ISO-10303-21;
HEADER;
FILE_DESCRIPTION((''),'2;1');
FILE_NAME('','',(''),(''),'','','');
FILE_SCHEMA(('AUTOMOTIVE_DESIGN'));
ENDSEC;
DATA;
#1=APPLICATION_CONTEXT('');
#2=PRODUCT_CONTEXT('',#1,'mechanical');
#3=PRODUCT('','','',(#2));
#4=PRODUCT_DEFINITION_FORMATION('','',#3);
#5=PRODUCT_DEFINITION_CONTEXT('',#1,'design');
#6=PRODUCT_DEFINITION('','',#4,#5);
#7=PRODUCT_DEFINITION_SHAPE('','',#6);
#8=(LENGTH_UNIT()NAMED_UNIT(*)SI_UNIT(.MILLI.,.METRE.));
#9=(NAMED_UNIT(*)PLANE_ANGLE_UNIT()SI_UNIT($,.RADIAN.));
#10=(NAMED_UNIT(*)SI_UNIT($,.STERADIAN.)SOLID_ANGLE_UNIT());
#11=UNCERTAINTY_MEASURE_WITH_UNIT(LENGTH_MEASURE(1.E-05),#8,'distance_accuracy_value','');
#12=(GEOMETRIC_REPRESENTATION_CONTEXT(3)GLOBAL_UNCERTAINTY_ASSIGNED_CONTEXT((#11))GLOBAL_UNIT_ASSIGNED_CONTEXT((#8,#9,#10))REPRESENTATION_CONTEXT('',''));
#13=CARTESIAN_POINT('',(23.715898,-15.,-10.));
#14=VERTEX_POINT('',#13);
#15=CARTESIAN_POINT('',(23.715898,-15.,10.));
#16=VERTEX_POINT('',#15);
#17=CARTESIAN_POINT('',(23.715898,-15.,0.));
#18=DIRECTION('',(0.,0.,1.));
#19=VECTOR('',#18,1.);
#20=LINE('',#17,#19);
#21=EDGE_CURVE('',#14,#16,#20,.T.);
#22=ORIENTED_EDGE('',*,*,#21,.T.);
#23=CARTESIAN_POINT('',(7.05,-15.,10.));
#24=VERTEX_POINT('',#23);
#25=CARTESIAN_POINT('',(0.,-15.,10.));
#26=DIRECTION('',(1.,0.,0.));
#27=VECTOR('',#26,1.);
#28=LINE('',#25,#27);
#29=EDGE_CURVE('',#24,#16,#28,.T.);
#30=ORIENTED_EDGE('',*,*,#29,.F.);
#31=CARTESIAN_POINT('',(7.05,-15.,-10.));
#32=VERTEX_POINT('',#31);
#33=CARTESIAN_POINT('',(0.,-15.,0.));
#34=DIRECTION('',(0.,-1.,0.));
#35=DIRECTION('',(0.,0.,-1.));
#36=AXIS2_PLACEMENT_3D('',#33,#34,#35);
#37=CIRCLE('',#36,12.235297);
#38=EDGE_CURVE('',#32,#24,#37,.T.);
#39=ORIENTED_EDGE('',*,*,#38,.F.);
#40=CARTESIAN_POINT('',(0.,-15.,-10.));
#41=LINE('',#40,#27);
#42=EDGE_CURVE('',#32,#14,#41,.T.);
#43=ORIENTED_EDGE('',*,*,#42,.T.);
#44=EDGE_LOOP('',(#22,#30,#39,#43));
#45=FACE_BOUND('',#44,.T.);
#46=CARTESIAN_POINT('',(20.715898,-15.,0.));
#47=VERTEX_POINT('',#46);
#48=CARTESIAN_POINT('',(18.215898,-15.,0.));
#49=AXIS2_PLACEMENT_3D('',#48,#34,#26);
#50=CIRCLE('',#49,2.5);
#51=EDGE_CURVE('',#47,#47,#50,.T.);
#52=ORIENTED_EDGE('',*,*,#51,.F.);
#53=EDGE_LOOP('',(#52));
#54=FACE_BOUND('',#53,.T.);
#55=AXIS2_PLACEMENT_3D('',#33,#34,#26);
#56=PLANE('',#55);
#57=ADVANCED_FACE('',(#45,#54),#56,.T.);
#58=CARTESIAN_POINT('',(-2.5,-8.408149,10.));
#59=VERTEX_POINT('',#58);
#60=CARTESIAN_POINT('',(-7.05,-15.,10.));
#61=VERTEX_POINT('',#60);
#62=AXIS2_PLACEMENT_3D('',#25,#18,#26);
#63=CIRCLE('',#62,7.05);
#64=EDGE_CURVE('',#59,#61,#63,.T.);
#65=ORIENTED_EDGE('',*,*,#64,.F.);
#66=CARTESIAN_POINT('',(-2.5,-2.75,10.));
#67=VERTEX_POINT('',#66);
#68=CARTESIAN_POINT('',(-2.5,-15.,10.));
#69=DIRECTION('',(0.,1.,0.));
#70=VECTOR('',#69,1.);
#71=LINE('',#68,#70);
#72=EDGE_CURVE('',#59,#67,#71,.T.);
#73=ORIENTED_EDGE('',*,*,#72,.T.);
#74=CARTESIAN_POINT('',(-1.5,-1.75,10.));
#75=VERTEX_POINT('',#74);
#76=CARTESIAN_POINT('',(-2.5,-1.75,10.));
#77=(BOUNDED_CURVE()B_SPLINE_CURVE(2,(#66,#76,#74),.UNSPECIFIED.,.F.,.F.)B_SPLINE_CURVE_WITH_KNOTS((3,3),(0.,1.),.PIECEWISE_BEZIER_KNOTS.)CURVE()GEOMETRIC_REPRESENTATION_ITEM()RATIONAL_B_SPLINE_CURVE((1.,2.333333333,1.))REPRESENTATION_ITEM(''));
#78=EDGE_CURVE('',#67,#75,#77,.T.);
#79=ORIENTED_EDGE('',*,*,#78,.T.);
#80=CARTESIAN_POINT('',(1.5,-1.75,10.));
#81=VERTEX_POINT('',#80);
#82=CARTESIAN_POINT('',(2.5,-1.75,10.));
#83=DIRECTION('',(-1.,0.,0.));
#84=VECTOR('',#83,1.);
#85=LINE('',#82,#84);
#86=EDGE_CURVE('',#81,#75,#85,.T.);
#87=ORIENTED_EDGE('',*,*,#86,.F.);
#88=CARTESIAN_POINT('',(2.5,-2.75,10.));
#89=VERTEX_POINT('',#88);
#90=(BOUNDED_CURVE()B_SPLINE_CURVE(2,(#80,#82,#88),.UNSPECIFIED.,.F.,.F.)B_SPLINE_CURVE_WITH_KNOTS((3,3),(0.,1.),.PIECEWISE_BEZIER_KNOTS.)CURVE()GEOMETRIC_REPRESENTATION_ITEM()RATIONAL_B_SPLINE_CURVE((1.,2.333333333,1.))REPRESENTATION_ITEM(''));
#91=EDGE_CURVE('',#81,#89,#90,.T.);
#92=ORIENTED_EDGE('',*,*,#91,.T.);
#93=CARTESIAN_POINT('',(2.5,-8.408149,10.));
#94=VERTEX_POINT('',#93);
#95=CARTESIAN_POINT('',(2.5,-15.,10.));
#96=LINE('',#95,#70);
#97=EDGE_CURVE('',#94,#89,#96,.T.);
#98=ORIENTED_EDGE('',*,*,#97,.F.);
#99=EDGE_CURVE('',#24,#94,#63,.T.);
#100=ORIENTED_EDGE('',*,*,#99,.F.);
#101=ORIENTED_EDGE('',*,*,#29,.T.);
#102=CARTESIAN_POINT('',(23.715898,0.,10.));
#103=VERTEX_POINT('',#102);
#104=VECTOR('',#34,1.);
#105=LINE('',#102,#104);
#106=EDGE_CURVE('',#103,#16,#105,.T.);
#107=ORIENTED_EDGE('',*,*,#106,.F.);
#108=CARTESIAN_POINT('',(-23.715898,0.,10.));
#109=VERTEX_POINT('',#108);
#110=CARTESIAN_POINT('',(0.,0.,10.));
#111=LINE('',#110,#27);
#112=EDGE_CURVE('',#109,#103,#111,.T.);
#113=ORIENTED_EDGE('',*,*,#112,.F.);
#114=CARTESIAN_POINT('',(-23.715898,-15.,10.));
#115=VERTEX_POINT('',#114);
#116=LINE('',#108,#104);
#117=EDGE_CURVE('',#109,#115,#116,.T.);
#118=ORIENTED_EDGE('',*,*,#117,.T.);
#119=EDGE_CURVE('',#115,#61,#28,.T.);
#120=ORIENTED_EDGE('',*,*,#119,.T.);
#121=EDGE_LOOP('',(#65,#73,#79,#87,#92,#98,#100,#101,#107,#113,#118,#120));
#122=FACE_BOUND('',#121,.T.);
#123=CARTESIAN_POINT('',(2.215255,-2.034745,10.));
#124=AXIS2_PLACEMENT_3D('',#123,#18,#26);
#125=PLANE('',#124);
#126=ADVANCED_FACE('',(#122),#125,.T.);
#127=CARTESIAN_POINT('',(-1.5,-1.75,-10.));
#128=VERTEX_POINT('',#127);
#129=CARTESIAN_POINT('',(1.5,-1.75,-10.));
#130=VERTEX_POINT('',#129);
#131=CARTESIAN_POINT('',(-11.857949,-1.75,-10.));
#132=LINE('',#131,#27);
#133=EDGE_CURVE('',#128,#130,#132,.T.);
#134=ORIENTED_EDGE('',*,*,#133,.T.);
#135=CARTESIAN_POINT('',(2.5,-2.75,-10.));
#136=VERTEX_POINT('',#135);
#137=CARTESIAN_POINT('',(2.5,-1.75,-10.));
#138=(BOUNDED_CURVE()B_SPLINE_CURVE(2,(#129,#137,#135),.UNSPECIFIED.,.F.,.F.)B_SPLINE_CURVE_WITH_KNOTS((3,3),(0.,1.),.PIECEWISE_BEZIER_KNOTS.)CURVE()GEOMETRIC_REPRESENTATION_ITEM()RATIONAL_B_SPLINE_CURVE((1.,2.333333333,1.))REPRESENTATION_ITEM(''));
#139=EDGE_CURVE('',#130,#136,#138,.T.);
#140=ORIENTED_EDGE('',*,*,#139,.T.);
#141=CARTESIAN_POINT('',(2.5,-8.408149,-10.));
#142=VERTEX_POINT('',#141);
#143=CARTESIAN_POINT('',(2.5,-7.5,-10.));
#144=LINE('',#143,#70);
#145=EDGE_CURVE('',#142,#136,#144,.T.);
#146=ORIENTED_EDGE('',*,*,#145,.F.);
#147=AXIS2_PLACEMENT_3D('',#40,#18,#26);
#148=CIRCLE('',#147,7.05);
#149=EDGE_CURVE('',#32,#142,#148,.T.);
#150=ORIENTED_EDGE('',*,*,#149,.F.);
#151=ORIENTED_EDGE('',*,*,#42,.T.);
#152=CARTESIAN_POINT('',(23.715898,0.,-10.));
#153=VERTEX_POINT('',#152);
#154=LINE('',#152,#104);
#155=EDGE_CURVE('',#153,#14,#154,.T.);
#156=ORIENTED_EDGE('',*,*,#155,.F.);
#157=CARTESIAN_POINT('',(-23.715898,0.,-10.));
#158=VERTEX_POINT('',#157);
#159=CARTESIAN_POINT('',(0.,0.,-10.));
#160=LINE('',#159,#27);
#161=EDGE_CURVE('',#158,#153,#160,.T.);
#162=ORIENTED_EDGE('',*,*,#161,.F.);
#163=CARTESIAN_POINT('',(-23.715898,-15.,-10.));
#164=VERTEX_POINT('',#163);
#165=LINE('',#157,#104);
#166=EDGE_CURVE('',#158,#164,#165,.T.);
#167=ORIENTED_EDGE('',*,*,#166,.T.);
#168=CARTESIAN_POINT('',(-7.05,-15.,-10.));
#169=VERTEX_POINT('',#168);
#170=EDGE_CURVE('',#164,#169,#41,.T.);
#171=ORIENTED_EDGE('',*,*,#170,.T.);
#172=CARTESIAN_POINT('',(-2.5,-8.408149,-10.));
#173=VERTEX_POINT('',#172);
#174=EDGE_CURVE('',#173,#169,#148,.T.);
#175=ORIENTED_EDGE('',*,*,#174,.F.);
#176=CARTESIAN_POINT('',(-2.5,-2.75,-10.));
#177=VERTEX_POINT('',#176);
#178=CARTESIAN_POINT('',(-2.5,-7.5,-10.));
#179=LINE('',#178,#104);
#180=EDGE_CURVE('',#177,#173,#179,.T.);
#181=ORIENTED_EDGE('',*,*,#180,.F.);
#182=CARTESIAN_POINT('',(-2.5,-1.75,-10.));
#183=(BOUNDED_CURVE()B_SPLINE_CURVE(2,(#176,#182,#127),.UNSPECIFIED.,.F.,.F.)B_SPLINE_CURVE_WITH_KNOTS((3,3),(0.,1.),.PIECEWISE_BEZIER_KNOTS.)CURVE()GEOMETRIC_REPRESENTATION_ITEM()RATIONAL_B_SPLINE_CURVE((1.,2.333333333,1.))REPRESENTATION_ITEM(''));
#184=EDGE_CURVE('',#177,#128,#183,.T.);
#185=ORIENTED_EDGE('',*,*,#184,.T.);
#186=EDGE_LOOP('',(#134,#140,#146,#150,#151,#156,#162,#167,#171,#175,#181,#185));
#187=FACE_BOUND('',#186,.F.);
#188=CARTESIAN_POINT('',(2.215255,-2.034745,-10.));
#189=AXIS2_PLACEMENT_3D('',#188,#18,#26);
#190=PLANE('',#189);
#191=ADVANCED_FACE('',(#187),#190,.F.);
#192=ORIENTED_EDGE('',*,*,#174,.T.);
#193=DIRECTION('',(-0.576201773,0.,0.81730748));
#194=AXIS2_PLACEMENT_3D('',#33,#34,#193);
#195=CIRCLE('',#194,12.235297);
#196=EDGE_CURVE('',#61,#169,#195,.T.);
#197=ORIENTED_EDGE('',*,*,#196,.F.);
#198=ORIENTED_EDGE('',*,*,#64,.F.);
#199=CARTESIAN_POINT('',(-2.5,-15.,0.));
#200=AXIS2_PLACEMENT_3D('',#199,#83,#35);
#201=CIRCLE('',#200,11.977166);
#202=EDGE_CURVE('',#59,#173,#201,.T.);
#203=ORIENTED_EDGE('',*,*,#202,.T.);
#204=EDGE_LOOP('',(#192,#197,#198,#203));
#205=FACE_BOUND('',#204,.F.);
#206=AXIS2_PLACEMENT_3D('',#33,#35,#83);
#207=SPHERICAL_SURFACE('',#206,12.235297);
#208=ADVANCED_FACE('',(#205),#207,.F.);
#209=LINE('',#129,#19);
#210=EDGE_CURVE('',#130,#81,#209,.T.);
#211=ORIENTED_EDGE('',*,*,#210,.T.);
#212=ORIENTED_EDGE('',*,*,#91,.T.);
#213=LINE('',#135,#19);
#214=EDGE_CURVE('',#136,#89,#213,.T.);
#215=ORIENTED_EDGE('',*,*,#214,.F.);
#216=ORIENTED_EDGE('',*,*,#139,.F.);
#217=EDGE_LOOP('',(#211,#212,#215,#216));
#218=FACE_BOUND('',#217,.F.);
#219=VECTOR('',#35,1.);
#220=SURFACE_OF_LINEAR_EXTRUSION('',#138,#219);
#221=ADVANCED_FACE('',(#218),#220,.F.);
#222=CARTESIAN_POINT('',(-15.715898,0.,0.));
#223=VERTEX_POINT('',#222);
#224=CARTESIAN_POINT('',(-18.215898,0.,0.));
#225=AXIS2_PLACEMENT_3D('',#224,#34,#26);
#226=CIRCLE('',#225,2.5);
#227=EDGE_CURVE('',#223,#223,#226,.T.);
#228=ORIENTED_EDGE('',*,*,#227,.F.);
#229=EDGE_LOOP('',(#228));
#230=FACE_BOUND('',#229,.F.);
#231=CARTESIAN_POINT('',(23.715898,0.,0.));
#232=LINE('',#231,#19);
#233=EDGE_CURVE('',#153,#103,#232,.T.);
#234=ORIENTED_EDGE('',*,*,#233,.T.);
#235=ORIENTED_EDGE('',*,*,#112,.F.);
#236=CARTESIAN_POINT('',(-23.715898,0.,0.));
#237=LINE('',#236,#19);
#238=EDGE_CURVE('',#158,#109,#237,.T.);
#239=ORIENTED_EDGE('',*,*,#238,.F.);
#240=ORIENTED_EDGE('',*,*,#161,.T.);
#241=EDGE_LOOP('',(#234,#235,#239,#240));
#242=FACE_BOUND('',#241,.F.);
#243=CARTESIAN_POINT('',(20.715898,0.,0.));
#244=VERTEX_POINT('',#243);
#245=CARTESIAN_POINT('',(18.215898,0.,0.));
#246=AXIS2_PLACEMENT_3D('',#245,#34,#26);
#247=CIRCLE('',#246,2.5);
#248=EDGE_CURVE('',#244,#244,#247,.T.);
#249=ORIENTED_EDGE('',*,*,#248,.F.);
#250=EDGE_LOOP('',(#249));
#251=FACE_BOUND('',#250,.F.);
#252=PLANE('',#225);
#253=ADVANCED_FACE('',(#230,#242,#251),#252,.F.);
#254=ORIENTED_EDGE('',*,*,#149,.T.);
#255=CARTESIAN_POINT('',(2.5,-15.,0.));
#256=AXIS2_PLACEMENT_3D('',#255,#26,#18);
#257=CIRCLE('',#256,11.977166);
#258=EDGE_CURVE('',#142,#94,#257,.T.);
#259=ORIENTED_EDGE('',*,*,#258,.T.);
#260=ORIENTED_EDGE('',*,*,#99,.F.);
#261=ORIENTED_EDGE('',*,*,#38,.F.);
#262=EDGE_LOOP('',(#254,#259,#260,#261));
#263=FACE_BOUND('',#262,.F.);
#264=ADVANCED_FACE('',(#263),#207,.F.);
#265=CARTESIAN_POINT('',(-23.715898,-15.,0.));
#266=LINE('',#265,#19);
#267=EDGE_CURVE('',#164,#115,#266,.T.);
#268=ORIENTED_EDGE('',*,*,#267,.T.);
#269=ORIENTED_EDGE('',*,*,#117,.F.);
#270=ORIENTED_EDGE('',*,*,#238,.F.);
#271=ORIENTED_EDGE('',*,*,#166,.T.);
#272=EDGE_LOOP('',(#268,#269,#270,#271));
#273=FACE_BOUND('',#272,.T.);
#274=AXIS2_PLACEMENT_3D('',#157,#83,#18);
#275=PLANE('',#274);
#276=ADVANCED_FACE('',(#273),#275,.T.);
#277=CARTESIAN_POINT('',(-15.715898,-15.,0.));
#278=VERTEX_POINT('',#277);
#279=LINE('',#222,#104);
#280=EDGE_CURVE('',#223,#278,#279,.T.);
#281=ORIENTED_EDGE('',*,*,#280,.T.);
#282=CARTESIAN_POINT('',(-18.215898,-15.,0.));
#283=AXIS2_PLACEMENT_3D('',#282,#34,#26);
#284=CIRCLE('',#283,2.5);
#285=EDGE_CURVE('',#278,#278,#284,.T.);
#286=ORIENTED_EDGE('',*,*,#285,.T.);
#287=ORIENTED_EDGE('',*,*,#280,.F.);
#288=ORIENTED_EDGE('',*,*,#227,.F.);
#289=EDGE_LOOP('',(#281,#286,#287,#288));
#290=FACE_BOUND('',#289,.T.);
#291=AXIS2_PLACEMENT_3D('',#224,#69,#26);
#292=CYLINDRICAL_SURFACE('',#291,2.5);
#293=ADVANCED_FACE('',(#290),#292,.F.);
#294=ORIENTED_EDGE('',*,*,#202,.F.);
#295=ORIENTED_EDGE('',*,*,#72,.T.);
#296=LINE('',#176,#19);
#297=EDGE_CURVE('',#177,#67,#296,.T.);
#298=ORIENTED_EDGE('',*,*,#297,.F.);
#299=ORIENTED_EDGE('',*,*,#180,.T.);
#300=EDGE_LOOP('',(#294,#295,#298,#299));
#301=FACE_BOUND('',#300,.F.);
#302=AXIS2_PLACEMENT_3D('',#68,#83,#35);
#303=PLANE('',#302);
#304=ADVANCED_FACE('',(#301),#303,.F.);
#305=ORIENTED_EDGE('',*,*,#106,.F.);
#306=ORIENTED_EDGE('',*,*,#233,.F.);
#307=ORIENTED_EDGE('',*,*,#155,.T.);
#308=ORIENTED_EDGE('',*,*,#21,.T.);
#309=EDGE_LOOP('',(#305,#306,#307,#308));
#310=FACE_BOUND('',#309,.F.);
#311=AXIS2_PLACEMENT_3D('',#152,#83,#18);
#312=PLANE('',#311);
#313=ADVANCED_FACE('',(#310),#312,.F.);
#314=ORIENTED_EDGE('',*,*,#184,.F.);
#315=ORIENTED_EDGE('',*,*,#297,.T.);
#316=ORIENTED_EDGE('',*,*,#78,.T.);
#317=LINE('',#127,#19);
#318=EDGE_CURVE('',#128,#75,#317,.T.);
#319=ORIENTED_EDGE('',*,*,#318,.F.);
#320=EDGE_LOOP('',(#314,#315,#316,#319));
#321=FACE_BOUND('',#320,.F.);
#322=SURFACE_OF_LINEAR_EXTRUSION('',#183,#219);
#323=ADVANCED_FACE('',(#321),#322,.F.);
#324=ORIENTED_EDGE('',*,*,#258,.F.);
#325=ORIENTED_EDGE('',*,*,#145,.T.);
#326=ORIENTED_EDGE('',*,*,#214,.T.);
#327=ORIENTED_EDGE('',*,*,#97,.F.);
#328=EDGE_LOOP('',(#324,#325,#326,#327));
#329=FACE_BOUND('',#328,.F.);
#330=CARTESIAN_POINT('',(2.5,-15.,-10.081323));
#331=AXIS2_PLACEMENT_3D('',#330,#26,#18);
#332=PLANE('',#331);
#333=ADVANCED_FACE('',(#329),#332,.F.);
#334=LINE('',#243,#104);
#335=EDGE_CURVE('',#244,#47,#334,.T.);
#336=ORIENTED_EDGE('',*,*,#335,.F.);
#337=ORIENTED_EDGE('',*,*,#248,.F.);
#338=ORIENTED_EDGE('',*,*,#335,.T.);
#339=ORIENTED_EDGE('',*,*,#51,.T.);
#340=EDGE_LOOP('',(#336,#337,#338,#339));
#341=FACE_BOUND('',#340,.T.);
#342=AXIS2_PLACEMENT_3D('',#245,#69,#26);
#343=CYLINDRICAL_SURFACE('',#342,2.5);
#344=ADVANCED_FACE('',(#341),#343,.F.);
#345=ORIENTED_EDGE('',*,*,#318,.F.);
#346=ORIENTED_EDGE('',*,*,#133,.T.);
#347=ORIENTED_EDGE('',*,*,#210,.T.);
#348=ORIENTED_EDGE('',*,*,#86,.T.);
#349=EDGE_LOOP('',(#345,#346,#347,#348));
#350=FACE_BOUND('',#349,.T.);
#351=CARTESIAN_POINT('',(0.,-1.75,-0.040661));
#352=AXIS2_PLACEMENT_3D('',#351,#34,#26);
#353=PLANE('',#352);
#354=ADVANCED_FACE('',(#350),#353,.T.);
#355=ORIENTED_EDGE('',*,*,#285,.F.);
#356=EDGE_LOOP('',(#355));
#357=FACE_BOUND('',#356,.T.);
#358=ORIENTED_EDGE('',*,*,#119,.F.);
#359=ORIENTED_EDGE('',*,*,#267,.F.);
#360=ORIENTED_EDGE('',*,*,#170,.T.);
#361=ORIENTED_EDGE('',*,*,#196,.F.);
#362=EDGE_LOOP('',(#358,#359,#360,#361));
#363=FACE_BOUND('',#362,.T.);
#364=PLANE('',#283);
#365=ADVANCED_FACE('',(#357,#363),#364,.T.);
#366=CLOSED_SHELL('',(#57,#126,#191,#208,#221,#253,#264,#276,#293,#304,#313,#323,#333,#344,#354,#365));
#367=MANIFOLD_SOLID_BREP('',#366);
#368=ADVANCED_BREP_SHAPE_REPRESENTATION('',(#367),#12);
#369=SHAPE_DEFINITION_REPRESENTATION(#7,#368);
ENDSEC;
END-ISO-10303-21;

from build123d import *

# Parameters (mm, degrees)
F0_W        = 47.4317967892
F0_H        = 20
F0_R        = 4.5
F1_DEPTH    = 15
F2_R        = 7.05
F3_DEPTH    = 25
F7_DEPTH    = 13.25
F8_T1_DEPTH = 20
F0_R_2      = 2.5
F9_DEPTH    = 15


# Not quite as in the source:
# - a fillet or chamfer that OpenCascade refuses, or shapes differently, is made with other operations: its cross-section is extruded or revolved along the edge and cut away or added


with BuildPart() as f1:
    # F0 (on Front) → F1 (new body)
    with BuildSketch(Plane.XZ):
        Rectangle(F0_W, F0_H)
        with Locations((-18.2158983946, 0)):
            Circle(F0_R, mode=Mode.SUBTRACT)
        with Locations((18.2158983946, 0)):
            Circle(F0_R, mode=Mode.SUBTRACT)
    extrude(amount=F1_DEPTH)

    # F2 (on face) → F3 (cut)
    with BuildSketch(Plane.XY.offset(10)):
        with Locations((0, -15)):
            Circle(F2_R)
    extrude(amount=-F3_DEPTH, mode=Mode.SUBTRACT)

    # F4 (on face) → F5 (revolve, cut)
    with BuildSketch(Plane.XZ.offset(15)):
        with BuildLine():
            Line((-7.05, -10), (-7.05, 10))
            ThreePointArc((-7.05, 10), (-12.2352972992, 0), (-7.05, -10))
        make_face()
    revolve(axis=Axis((0, -15, 0.0368109904), (0, 0, -1)), mode=Mode.SUBTRACT)

    # F6 (on face) → F7 (cut)
    with BuildSketch(Plane.XZ.offset(15)):
        Polygon((2.5, -10.0813228637), (2.5, 10), (0, 10), (-2.5, 10), (-2.5, -10.0813228637), (0, -10.0813228637), align=None)
    extrude(amount=-F7_DEPTH, mode=Mode.SUBTRACT)

    # F8: fillet of radius 1 on 2 edges, made by hand

    # F8_s2 → F8_t1 (join)
    with BuildSketch(Plane.XY.offset(-10)):
        with BuildLine():
            add(Edge.make_bspline(
                [(1.5, -1.75), (2.5, -1.75), (2.5, -2.75)],
                knots=[0, 0, 0, 1, 1, 1], degree=2, weights=[1, 2.3333333333, 1]))
            Line((2.5, -2.75), (2.5, -1.75))
            Line((2.5, -1.75), (1.5, -1.75))
        make_face()
        with BuildLine():
            add(Edge.make_bspline(
                [(-2.5, -2.75), (-2.5, -1.75), (-1.5, -1.75)],
                knots=[0, 0, 0, 1, 1, 1], degree=2, weights=[1, 2.3333333333, 1]))
            Line((-1.5, -1.75), (-2.5, -1.75))
            Line((-2.5, -1.75), (-2.5, -2.75))
        make_face()
    extrude(amount=F8_T1_DEPTH)

    # F0 (on Front) → F9 (join)
    with BuildSketch(Plane.XZ):
        with Locations((-18.2158983946, 0)):
            Circle(F0_R)
        with Locations((-18.2158983946, 0)):
            Circle(F0_R_2, mode=Mode.SUBTRACT)
        with Locations((18.2158983946, 0)):
            Circle(F0_R)
        with Locations((18.2158983946, 0)):
            Circle(F0_R_2, mode=Mode.SUBTRACT)
    extrude(amount=F9_DEPTH)


solid = f1.part
